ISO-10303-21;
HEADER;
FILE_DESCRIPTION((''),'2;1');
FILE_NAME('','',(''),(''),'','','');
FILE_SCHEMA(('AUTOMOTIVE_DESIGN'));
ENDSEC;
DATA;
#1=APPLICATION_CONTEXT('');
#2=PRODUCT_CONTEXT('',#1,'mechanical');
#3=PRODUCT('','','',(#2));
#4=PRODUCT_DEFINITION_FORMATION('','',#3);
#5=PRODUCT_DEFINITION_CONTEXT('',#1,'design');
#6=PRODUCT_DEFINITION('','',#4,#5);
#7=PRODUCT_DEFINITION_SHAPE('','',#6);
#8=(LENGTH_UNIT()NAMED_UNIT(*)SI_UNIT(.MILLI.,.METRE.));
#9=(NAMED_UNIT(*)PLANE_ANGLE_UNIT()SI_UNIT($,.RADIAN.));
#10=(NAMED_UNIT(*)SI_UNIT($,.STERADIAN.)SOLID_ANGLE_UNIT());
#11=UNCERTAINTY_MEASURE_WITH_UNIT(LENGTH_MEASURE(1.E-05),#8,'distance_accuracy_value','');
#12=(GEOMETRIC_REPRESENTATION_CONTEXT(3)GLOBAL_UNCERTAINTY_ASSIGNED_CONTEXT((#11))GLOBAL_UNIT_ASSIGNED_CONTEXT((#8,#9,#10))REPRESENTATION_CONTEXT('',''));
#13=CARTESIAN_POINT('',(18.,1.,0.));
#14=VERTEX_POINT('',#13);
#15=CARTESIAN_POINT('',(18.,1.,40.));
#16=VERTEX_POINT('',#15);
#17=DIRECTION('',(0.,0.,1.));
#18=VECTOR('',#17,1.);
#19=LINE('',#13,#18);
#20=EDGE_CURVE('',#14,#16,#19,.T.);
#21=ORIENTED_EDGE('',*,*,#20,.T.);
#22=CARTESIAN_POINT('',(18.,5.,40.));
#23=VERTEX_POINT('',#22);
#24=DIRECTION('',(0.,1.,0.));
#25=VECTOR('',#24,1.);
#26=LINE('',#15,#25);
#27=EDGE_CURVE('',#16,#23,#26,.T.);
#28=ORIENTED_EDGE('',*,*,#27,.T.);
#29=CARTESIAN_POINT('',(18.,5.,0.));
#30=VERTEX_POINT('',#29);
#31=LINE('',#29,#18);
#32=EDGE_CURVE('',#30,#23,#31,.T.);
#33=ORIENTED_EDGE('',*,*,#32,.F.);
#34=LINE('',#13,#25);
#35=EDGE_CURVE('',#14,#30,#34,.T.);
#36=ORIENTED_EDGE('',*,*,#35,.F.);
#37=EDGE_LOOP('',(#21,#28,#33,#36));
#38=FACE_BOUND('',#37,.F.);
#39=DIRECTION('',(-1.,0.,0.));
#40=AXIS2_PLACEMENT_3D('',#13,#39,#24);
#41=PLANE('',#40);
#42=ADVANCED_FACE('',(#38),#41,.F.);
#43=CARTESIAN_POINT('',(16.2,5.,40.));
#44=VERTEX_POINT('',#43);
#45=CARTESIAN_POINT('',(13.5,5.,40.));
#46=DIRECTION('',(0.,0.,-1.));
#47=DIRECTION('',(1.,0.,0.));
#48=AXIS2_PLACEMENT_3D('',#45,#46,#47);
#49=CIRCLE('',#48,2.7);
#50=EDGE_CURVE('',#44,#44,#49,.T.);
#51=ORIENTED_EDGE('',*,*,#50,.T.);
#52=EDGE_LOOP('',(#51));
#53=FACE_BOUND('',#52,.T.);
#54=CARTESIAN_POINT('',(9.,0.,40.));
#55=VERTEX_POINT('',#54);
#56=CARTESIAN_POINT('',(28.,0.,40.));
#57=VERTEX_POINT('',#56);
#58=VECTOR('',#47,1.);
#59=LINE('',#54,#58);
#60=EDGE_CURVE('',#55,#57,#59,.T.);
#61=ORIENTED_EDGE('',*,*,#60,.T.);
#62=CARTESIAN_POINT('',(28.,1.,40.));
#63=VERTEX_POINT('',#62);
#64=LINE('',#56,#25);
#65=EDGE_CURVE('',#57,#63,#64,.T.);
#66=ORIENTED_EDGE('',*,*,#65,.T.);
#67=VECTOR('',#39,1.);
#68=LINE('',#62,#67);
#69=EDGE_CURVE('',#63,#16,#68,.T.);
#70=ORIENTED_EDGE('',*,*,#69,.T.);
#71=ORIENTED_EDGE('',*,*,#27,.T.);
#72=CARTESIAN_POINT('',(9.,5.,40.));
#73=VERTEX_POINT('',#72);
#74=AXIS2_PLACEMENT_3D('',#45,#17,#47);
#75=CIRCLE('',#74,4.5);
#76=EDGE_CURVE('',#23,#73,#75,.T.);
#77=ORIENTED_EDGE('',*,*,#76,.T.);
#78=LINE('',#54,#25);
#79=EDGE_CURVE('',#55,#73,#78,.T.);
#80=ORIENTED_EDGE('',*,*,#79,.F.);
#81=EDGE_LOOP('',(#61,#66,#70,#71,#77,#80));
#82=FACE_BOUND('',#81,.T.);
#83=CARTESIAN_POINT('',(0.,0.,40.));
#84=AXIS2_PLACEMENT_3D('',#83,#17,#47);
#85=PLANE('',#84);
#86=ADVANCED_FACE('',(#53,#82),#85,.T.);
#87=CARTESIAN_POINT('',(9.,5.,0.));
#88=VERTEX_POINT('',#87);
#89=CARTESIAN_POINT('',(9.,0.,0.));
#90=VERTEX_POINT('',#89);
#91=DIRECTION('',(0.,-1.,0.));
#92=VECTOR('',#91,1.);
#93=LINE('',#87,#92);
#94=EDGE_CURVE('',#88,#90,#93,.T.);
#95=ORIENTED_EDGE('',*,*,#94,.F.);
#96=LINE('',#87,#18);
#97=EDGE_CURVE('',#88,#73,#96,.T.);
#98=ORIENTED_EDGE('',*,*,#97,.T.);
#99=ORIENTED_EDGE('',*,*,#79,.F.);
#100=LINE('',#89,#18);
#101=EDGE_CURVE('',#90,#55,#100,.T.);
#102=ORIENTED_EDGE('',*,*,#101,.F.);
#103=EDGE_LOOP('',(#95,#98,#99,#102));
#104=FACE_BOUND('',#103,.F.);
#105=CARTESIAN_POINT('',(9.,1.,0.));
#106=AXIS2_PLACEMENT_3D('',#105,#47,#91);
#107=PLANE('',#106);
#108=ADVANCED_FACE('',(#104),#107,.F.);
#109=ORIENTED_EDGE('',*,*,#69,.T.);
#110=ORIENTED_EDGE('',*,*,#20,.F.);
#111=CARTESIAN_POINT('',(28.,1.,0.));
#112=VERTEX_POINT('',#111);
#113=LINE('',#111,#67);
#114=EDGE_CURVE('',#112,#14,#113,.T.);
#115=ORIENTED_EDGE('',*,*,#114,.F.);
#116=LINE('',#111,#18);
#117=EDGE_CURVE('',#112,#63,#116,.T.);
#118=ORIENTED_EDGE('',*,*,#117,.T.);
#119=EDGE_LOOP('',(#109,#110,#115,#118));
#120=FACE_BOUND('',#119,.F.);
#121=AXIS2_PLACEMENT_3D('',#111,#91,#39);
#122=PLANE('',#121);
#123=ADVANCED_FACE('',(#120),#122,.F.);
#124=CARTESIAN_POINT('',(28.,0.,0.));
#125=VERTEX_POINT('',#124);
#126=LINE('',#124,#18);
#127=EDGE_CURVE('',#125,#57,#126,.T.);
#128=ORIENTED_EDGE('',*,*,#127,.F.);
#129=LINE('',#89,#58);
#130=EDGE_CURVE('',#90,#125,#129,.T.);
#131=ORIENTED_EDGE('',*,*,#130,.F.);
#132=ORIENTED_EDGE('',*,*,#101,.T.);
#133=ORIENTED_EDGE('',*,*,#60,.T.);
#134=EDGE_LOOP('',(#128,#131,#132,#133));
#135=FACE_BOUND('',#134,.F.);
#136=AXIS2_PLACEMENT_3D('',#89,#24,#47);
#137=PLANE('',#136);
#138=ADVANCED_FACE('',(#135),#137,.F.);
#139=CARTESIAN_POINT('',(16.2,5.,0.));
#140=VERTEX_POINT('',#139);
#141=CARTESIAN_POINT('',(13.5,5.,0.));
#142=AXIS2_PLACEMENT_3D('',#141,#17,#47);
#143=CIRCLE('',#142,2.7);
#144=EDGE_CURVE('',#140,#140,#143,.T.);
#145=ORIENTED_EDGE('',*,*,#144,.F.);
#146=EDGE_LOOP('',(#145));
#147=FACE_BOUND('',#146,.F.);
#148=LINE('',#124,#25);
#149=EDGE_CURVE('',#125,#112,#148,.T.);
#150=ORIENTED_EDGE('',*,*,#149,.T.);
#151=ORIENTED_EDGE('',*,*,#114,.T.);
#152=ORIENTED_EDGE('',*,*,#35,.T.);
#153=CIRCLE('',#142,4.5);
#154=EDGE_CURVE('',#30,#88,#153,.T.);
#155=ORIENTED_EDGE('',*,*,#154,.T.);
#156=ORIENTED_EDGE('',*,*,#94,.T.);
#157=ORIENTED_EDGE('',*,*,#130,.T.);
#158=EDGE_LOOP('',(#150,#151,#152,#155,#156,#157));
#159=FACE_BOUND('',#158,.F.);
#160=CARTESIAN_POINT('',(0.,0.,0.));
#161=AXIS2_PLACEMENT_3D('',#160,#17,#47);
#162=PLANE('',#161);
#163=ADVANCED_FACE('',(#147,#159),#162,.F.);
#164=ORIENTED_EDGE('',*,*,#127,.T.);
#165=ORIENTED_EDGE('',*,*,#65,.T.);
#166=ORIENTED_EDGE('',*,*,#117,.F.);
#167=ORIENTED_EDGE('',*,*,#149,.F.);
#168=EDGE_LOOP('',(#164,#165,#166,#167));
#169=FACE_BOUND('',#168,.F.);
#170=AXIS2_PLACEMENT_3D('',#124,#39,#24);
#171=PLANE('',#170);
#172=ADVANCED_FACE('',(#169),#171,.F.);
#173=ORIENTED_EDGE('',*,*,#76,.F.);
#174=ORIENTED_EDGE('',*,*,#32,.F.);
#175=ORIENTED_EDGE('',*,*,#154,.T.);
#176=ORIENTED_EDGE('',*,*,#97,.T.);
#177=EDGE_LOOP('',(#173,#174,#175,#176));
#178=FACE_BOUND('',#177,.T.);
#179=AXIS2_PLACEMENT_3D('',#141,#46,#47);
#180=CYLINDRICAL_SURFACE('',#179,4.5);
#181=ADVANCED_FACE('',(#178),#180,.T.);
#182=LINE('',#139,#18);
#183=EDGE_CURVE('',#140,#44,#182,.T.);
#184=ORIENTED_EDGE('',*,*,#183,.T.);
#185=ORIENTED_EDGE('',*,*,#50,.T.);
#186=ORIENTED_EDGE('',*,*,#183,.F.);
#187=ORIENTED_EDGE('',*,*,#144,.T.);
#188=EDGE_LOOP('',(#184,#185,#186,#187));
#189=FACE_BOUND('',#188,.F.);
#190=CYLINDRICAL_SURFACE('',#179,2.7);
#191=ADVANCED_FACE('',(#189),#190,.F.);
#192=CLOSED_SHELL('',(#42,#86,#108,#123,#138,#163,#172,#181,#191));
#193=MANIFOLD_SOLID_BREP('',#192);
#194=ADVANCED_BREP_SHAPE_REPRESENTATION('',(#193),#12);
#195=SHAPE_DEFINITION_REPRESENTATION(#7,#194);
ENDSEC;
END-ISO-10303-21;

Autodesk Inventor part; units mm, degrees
ref_plane "YZ Plane" through (0, 0, 0) normal (1, 0, 0) x (0, 1, 0)
ref_plane "XZ Plane" through (0, 0, 0) normal (0, 1, 0) x (-1, 0, 0)
ref_plane "XY Plane" through (0, 0, 0) normal (0, 0, 1) x (1, 0, 0)
sketch "Sketch1" plane through (0, 0, 0) normal (0, 0, 1) x (1, 0, 0)
  line L0 (9, 0) -> (28, 0)
  line L1 (28, 0) -> (28, 1)
  line L2 (28, 1) -> (9, 1)
  line L3 (9, 1) -> (18, 1)
  line L4 (18, 1) -> (18, 5)
  line L5 (18, 5) -> (9, 5)
  line L6 (9, 5) -> (9, 1)
  circle A0 centre (13.5, 5) radius 4.5
  circle A1 centre (13.5, 5) radius 2.5
  line L7 (9, 1) -> (9, 0)
  point P0 (0, 0)
  point P1 (28, 0.5)
  point P2 (18, 1)
  point P3 (11.4384, 1)
  point P4 (15.5616, 1)
  dimension "d1" = 1
  dimension "d2" = 5
  dimension "d3" = 5
  dimension "d4" = 2
  dimension "d5" = 10
  dimension "d11" = 9
extrude "Extrusion1" add sketch "Sketch1" along normal blind 40 contours L7 L2 A0 L1 L0 | L6 A0 L2 | A0 L5 A1 L2 | L2 A0 | A0 L5 A1 | L2 A0 L4
thicken "Thicken1" operation cut thickness 0.2 both sides no extend neighbours no toward (0.9870503, -0.1604113, 0) faces at (15.9676, 4.599, 26.6667)
properties part number "LI0017-LATCH BARREL"
